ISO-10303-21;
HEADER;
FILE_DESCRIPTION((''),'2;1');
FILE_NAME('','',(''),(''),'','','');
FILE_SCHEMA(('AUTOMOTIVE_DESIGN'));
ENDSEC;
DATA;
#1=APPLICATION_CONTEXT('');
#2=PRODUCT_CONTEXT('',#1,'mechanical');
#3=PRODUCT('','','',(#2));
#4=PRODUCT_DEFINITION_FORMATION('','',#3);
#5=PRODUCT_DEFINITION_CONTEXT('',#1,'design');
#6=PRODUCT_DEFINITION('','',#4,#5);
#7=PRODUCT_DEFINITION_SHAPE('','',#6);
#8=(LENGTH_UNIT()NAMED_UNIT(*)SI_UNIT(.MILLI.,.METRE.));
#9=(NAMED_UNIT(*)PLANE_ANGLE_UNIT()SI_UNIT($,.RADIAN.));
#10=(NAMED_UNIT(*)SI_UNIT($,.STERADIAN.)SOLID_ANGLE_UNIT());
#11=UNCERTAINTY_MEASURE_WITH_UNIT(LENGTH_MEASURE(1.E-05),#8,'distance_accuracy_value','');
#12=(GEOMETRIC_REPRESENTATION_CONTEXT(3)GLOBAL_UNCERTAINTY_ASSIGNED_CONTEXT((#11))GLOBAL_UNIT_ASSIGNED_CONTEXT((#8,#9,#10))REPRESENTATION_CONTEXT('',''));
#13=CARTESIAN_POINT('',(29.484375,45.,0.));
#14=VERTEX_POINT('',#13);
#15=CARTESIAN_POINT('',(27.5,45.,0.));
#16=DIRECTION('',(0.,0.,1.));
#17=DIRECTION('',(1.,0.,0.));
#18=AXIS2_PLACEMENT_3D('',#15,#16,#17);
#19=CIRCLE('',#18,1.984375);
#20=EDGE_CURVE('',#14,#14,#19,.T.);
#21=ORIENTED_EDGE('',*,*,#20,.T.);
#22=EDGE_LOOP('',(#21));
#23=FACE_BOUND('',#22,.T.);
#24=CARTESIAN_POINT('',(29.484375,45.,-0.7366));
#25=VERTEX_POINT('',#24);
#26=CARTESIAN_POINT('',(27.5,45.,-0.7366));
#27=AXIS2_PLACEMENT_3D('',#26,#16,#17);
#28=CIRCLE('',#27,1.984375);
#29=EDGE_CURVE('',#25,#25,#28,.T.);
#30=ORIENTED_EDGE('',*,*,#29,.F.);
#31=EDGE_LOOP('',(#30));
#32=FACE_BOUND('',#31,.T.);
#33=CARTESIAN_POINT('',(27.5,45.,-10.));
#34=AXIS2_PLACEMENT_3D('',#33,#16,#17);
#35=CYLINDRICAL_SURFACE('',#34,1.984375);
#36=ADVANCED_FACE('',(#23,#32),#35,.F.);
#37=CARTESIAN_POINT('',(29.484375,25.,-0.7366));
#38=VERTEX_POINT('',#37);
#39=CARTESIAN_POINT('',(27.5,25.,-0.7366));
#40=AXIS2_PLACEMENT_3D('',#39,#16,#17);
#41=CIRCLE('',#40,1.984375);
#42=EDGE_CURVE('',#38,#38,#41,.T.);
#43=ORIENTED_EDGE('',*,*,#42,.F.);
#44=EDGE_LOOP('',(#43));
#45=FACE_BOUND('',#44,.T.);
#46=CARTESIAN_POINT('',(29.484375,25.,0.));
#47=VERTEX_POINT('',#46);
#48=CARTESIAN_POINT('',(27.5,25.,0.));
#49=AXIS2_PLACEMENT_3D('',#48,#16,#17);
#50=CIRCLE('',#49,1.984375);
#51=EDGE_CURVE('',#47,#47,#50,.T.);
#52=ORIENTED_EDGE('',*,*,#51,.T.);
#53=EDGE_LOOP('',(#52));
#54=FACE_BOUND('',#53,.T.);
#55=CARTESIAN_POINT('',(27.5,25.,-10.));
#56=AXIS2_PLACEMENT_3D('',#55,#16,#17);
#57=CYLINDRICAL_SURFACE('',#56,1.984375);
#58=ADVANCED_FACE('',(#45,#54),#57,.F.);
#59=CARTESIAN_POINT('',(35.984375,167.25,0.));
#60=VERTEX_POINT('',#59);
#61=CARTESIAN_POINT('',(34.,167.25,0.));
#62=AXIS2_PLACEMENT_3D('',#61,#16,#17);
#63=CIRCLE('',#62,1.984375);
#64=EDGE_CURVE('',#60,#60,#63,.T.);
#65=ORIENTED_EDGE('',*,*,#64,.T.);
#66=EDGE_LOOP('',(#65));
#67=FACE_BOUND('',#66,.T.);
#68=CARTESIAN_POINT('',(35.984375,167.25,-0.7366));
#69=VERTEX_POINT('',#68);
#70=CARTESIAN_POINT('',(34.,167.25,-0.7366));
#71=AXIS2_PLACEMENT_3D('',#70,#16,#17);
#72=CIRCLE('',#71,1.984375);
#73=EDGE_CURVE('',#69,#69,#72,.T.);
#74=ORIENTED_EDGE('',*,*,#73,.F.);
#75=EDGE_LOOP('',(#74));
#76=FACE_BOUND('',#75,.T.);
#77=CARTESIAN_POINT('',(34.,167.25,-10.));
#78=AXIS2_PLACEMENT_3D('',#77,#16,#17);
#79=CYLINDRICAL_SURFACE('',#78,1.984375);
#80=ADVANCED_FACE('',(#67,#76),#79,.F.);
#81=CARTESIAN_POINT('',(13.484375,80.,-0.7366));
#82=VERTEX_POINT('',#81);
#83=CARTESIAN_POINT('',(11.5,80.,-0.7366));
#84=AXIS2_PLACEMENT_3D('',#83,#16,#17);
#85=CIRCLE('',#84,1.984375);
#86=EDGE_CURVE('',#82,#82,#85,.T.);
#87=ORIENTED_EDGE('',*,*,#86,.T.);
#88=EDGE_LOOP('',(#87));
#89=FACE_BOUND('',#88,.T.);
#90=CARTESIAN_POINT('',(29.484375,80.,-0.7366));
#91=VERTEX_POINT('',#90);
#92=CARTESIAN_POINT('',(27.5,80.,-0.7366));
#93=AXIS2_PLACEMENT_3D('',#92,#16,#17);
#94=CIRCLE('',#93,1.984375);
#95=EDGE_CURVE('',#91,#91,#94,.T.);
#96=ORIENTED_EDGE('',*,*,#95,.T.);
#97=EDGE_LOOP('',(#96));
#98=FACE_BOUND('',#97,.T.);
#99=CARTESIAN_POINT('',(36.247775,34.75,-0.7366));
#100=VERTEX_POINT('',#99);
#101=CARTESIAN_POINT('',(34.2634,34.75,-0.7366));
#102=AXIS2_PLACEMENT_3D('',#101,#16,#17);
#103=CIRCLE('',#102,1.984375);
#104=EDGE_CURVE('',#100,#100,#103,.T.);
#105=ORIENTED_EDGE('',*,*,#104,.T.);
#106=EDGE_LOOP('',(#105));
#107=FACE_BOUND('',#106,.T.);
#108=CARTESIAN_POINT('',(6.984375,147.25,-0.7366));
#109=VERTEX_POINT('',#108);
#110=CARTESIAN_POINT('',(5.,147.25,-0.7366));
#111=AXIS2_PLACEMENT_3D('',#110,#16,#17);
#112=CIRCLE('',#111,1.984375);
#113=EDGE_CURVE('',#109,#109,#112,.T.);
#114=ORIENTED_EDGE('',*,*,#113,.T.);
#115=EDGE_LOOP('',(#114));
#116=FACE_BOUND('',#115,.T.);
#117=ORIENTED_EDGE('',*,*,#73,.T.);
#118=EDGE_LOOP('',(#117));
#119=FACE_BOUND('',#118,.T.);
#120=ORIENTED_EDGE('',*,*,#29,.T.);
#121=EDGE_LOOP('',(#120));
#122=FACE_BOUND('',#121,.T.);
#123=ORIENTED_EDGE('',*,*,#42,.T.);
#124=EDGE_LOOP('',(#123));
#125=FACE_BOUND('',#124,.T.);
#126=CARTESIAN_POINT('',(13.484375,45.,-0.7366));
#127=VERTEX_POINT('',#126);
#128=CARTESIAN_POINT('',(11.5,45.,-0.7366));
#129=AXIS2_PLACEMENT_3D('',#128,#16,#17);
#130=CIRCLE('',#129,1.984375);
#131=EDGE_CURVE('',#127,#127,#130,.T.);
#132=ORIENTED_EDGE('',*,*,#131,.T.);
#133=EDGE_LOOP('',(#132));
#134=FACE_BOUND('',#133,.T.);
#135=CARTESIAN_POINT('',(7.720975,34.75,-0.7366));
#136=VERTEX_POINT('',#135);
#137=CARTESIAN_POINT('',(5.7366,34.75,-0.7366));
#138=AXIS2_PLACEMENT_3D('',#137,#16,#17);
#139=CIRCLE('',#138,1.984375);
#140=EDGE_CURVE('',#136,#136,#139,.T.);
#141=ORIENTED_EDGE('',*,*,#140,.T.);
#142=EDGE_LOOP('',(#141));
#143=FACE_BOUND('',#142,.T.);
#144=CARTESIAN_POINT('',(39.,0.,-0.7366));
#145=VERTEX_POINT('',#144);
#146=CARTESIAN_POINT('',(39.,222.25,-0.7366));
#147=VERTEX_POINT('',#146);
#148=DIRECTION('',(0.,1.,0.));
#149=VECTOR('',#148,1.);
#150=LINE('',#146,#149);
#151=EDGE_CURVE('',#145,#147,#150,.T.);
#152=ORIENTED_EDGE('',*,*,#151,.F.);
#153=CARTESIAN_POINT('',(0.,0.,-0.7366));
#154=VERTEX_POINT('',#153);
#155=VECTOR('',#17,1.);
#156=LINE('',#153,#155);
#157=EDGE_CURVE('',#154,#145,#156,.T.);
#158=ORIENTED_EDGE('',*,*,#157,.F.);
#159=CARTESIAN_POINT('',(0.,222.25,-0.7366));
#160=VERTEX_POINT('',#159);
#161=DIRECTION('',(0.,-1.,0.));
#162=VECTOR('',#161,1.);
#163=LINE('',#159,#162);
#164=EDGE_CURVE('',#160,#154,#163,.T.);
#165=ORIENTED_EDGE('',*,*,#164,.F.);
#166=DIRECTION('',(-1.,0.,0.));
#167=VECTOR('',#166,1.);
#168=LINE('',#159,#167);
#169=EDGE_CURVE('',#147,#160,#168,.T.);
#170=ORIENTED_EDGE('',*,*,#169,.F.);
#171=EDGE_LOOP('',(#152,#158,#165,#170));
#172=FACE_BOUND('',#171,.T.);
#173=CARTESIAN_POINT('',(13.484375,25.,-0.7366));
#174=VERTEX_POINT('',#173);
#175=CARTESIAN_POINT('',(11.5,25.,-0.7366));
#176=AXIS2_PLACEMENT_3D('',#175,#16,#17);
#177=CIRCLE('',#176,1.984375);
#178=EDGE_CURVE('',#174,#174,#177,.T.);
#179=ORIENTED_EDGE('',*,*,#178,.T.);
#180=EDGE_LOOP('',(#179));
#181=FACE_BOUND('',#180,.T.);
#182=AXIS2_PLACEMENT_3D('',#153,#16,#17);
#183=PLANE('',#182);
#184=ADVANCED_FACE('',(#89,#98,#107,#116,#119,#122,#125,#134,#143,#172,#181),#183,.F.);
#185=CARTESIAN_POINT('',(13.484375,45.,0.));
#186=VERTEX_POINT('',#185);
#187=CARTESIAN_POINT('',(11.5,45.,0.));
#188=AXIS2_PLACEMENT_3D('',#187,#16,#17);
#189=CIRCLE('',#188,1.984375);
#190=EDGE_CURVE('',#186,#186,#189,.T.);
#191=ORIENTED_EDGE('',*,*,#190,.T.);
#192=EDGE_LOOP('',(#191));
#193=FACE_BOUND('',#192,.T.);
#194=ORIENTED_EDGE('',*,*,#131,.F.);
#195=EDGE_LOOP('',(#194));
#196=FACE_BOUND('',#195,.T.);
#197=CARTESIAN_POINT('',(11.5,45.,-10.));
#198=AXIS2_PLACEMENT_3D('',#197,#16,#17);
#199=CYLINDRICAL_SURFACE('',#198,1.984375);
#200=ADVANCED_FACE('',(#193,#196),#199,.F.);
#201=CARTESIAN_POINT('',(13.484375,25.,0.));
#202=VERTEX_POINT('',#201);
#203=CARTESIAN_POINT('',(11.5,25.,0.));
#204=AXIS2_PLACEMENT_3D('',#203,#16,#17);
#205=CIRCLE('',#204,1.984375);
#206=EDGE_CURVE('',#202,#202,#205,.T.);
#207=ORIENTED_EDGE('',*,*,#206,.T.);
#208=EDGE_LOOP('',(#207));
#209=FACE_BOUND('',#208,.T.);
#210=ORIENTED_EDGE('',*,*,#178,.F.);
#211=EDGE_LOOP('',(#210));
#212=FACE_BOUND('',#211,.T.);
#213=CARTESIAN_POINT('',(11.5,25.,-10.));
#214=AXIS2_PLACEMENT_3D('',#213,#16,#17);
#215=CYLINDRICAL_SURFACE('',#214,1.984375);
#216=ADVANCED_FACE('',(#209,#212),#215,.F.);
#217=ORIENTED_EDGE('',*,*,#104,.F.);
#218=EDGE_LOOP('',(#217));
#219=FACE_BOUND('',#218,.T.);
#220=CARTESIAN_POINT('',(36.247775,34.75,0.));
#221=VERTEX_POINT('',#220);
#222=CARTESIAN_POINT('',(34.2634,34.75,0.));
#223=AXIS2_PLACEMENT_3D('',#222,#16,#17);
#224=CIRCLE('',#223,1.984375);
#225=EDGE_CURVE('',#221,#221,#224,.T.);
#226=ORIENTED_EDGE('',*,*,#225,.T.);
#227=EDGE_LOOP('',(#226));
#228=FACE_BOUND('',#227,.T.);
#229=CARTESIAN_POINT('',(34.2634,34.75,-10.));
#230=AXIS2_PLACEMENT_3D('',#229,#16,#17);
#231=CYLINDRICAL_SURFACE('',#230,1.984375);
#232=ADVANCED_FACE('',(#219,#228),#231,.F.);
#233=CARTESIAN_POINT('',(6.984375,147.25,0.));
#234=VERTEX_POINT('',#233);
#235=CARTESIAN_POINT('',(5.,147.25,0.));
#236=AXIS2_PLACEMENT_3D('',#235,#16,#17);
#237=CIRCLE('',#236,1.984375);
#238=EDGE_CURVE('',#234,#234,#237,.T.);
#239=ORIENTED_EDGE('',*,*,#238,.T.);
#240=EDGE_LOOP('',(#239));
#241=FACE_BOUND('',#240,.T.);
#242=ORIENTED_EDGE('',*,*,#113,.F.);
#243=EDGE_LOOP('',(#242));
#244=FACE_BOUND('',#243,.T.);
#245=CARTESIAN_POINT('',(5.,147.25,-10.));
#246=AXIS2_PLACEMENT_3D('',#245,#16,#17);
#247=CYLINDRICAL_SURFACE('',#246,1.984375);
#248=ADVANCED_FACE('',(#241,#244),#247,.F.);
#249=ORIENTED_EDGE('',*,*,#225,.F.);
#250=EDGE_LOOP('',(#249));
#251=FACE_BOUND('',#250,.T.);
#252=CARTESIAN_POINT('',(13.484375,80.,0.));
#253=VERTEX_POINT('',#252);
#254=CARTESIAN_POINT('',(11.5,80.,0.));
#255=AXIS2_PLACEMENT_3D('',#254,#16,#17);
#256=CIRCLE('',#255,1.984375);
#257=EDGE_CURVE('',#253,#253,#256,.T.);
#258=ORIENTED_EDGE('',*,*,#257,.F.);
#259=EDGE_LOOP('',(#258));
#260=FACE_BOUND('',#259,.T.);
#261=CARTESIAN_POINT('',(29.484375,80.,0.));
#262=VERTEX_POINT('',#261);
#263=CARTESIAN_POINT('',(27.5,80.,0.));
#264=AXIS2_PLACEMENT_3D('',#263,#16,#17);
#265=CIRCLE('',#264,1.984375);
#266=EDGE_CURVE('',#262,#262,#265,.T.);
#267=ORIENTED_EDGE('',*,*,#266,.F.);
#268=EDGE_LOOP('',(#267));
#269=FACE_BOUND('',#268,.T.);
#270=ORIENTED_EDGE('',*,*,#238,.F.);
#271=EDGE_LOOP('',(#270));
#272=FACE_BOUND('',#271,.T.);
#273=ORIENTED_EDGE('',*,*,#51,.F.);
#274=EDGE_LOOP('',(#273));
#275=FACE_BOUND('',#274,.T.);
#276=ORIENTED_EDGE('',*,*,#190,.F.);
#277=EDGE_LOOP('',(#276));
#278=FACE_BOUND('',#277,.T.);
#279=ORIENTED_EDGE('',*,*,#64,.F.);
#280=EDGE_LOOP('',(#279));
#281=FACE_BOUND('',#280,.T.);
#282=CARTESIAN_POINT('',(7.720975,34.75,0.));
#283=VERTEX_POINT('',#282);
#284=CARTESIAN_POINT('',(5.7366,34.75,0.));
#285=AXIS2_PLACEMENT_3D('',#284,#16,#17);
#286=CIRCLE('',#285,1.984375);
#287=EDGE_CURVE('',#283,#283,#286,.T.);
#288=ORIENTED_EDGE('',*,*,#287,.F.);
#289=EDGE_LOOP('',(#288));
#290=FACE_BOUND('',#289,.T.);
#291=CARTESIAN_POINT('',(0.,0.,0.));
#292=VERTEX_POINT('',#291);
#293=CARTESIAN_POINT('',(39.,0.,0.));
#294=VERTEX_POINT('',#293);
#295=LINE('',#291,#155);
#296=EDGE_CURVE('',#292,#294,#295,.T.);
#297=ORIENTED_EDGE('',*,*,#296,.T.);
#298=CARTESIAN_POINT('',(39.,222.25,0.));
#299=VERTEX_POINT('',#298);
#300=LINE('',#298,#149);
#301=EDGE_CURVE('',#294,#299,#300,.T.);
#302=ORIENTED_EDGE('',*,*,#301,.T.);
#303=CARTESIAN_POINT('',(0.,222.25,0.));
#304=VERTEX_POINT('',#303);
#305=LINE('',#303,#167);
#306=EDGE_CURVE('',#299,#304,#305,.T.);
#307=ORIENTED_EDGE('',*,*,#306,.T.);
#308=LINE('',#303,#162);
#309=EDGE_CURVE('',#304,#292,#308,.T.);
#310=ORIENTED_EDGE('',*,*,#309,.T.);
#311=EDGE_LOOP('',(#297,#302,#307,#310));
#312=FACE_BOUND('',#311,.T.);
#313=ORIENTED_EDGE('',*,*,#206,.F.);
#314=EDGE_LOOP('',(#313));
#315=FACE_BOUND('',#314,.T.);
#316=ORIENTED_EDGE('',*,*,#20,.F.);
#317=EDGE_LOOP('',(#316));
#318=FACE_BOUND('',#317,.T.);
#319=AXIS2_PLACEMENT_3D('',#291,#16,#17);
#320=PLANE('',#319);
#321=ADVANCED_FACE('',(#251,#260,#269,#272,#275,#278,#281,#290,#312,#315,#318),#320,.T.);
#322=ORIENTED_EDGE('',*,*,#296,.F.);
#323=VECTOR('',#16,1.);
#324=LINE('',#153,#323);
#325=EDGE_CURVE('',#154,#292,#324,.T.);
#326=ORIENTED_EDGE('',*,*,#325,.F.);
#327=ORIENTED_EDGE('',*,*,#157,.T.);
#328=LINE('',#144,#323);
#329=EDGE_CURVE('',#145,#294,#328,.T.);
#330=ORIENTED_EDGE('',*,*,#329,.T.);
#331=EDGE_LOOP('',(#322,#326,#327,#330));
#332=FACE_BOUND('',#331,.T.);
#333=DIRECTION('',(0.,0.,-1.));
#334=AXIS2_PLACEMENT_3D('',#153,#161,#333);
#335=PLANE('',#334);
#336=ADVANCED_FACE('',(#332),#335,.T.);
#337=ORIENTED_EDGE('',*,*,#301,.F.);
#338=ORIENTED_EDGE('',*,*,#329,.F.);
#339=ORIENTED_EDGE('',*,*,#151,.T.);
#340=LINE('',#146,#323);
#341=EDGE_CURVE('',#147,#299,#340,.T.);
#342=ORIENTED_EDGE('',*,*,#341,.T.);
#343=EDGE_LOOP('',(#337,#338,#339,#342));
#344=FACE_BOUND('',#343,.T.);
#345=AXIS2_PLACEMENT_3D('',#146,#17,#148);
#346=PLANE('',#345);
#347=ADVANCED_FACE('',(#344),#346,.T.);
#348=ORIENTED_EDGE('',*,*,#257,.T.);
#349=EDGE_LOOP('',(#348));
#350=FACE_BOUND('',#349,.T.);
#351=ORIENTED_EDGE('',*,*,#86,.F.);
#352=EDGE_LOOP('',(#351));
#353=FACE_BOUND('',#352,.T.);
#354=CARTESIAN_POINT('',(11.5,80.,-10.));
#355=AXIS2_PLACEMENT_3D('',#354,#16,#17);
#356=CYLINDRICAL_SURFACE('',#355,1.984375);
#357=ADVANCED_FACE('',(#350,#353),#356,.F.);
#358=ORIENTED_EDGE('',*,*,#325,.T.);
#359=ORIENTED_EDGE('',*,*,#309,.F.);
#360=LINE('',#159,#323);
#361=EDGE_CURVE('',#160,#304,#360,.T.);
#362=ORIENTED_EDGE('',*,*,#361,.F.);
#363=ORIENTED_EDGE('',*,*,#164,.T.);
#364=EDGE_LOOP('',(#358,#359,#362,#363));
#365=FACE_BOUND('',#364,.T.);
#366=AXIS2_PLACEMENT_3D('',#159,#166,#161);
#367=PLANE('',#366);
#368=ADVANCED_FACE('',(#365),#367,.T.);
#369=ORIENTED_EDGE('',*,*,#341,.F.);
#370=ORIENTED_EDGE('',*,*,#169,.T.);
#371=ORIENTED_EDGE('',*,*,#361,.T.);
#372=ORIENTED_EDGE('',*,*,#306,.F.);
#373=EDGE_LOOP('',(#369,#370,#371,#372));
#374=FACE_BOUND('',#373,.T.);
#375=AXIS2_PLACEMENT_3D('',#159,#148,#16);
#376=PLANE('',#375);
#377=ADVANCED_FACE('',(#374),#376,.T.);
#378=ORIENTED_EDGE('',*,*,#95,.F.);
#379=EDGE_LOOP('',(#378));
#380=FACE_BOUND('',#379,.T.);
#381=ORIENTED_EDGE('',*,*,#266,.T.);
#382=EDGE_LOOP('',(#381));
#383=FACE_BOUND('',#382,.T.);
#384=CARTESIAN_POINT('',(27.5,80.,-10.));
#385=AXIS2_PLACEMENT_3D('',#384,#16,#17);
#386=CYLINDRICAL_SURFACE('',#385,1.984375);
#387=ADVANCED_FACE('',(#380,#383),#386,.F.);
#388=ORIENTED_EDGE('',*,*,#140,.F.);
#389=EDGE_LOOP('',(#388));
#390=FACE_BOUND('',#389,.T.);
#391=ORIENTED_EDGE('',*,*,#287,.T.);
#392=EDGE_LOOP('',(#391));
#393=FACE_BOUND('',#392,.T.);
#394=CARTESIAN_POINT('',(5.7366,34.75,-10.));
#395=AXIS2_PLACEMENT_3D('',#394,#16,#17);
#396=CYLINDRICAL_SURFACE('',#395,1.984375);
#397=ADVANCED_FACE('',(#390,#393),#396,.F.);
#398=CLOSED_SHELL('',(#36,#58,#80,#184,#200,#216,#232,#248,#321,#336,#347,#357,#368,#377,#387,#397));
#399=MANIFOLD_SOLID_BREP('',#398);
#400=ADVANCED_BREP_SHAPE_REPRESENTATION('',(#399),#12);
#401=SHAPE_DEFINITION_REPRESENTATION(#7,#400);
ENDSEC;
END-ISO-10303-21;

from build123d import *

# Parameters (mm, degrees)
SKETCH1_W          = 39
SKETCH1_H          = 222.25
BASE_FLANGE1_DEPTH = 0.7366
SKETCH2_R          = 1.984375
CUT_EXTRUDE1_DEPTH = 10


# Sheet-metal steps are written as plain solids
with BuildPart() as part:
    # Sketch1 → Base-Flange1 (new body)
    with BuildSketch(Plane.XY):
        with Locations((19.5, 111.125)):
            Rectangle(SKETCH1_W, SKETCH1_H)
    extrude(amount=-BASE_FLANGE1_DEPTH)

    # Sketch2 → Cut-Extrude1 (cut)
    with BuildSketch(Plane.XY):
        with Locations((5, 147.25)):
            Circle(SKETCH2_R)
        with Locations((34, 167.25)):
            Circle(SKETCH2_R)
        with Locations((27.5, 80)):
            Circle(SKETCH2_R)
        with Locations((11.5, 80)):
            Circle(SKETCH2_R)
        with Locations((11.5, 45)):
            Circle(SKETCH2_R)
        with Locations((27.5, 45)):
            Circle(SKETCH2_R)
        with Locations((5.7366, 34.75)):
            Circle(SKETCH2_R)
        with Locations((34.2634, 34.75)):
            Circle(SKETCH2_R)
        with Locations((27.5, 25)):
            Circle(SKETCH2_R)
        with Locations((11.5, 25)):
            Circle(SKETCH2_R)
    extrude(amount=-CUT_EXTRUDE1_DEPTH, mode=Mode.SUBTRACT)


solid = part.part
